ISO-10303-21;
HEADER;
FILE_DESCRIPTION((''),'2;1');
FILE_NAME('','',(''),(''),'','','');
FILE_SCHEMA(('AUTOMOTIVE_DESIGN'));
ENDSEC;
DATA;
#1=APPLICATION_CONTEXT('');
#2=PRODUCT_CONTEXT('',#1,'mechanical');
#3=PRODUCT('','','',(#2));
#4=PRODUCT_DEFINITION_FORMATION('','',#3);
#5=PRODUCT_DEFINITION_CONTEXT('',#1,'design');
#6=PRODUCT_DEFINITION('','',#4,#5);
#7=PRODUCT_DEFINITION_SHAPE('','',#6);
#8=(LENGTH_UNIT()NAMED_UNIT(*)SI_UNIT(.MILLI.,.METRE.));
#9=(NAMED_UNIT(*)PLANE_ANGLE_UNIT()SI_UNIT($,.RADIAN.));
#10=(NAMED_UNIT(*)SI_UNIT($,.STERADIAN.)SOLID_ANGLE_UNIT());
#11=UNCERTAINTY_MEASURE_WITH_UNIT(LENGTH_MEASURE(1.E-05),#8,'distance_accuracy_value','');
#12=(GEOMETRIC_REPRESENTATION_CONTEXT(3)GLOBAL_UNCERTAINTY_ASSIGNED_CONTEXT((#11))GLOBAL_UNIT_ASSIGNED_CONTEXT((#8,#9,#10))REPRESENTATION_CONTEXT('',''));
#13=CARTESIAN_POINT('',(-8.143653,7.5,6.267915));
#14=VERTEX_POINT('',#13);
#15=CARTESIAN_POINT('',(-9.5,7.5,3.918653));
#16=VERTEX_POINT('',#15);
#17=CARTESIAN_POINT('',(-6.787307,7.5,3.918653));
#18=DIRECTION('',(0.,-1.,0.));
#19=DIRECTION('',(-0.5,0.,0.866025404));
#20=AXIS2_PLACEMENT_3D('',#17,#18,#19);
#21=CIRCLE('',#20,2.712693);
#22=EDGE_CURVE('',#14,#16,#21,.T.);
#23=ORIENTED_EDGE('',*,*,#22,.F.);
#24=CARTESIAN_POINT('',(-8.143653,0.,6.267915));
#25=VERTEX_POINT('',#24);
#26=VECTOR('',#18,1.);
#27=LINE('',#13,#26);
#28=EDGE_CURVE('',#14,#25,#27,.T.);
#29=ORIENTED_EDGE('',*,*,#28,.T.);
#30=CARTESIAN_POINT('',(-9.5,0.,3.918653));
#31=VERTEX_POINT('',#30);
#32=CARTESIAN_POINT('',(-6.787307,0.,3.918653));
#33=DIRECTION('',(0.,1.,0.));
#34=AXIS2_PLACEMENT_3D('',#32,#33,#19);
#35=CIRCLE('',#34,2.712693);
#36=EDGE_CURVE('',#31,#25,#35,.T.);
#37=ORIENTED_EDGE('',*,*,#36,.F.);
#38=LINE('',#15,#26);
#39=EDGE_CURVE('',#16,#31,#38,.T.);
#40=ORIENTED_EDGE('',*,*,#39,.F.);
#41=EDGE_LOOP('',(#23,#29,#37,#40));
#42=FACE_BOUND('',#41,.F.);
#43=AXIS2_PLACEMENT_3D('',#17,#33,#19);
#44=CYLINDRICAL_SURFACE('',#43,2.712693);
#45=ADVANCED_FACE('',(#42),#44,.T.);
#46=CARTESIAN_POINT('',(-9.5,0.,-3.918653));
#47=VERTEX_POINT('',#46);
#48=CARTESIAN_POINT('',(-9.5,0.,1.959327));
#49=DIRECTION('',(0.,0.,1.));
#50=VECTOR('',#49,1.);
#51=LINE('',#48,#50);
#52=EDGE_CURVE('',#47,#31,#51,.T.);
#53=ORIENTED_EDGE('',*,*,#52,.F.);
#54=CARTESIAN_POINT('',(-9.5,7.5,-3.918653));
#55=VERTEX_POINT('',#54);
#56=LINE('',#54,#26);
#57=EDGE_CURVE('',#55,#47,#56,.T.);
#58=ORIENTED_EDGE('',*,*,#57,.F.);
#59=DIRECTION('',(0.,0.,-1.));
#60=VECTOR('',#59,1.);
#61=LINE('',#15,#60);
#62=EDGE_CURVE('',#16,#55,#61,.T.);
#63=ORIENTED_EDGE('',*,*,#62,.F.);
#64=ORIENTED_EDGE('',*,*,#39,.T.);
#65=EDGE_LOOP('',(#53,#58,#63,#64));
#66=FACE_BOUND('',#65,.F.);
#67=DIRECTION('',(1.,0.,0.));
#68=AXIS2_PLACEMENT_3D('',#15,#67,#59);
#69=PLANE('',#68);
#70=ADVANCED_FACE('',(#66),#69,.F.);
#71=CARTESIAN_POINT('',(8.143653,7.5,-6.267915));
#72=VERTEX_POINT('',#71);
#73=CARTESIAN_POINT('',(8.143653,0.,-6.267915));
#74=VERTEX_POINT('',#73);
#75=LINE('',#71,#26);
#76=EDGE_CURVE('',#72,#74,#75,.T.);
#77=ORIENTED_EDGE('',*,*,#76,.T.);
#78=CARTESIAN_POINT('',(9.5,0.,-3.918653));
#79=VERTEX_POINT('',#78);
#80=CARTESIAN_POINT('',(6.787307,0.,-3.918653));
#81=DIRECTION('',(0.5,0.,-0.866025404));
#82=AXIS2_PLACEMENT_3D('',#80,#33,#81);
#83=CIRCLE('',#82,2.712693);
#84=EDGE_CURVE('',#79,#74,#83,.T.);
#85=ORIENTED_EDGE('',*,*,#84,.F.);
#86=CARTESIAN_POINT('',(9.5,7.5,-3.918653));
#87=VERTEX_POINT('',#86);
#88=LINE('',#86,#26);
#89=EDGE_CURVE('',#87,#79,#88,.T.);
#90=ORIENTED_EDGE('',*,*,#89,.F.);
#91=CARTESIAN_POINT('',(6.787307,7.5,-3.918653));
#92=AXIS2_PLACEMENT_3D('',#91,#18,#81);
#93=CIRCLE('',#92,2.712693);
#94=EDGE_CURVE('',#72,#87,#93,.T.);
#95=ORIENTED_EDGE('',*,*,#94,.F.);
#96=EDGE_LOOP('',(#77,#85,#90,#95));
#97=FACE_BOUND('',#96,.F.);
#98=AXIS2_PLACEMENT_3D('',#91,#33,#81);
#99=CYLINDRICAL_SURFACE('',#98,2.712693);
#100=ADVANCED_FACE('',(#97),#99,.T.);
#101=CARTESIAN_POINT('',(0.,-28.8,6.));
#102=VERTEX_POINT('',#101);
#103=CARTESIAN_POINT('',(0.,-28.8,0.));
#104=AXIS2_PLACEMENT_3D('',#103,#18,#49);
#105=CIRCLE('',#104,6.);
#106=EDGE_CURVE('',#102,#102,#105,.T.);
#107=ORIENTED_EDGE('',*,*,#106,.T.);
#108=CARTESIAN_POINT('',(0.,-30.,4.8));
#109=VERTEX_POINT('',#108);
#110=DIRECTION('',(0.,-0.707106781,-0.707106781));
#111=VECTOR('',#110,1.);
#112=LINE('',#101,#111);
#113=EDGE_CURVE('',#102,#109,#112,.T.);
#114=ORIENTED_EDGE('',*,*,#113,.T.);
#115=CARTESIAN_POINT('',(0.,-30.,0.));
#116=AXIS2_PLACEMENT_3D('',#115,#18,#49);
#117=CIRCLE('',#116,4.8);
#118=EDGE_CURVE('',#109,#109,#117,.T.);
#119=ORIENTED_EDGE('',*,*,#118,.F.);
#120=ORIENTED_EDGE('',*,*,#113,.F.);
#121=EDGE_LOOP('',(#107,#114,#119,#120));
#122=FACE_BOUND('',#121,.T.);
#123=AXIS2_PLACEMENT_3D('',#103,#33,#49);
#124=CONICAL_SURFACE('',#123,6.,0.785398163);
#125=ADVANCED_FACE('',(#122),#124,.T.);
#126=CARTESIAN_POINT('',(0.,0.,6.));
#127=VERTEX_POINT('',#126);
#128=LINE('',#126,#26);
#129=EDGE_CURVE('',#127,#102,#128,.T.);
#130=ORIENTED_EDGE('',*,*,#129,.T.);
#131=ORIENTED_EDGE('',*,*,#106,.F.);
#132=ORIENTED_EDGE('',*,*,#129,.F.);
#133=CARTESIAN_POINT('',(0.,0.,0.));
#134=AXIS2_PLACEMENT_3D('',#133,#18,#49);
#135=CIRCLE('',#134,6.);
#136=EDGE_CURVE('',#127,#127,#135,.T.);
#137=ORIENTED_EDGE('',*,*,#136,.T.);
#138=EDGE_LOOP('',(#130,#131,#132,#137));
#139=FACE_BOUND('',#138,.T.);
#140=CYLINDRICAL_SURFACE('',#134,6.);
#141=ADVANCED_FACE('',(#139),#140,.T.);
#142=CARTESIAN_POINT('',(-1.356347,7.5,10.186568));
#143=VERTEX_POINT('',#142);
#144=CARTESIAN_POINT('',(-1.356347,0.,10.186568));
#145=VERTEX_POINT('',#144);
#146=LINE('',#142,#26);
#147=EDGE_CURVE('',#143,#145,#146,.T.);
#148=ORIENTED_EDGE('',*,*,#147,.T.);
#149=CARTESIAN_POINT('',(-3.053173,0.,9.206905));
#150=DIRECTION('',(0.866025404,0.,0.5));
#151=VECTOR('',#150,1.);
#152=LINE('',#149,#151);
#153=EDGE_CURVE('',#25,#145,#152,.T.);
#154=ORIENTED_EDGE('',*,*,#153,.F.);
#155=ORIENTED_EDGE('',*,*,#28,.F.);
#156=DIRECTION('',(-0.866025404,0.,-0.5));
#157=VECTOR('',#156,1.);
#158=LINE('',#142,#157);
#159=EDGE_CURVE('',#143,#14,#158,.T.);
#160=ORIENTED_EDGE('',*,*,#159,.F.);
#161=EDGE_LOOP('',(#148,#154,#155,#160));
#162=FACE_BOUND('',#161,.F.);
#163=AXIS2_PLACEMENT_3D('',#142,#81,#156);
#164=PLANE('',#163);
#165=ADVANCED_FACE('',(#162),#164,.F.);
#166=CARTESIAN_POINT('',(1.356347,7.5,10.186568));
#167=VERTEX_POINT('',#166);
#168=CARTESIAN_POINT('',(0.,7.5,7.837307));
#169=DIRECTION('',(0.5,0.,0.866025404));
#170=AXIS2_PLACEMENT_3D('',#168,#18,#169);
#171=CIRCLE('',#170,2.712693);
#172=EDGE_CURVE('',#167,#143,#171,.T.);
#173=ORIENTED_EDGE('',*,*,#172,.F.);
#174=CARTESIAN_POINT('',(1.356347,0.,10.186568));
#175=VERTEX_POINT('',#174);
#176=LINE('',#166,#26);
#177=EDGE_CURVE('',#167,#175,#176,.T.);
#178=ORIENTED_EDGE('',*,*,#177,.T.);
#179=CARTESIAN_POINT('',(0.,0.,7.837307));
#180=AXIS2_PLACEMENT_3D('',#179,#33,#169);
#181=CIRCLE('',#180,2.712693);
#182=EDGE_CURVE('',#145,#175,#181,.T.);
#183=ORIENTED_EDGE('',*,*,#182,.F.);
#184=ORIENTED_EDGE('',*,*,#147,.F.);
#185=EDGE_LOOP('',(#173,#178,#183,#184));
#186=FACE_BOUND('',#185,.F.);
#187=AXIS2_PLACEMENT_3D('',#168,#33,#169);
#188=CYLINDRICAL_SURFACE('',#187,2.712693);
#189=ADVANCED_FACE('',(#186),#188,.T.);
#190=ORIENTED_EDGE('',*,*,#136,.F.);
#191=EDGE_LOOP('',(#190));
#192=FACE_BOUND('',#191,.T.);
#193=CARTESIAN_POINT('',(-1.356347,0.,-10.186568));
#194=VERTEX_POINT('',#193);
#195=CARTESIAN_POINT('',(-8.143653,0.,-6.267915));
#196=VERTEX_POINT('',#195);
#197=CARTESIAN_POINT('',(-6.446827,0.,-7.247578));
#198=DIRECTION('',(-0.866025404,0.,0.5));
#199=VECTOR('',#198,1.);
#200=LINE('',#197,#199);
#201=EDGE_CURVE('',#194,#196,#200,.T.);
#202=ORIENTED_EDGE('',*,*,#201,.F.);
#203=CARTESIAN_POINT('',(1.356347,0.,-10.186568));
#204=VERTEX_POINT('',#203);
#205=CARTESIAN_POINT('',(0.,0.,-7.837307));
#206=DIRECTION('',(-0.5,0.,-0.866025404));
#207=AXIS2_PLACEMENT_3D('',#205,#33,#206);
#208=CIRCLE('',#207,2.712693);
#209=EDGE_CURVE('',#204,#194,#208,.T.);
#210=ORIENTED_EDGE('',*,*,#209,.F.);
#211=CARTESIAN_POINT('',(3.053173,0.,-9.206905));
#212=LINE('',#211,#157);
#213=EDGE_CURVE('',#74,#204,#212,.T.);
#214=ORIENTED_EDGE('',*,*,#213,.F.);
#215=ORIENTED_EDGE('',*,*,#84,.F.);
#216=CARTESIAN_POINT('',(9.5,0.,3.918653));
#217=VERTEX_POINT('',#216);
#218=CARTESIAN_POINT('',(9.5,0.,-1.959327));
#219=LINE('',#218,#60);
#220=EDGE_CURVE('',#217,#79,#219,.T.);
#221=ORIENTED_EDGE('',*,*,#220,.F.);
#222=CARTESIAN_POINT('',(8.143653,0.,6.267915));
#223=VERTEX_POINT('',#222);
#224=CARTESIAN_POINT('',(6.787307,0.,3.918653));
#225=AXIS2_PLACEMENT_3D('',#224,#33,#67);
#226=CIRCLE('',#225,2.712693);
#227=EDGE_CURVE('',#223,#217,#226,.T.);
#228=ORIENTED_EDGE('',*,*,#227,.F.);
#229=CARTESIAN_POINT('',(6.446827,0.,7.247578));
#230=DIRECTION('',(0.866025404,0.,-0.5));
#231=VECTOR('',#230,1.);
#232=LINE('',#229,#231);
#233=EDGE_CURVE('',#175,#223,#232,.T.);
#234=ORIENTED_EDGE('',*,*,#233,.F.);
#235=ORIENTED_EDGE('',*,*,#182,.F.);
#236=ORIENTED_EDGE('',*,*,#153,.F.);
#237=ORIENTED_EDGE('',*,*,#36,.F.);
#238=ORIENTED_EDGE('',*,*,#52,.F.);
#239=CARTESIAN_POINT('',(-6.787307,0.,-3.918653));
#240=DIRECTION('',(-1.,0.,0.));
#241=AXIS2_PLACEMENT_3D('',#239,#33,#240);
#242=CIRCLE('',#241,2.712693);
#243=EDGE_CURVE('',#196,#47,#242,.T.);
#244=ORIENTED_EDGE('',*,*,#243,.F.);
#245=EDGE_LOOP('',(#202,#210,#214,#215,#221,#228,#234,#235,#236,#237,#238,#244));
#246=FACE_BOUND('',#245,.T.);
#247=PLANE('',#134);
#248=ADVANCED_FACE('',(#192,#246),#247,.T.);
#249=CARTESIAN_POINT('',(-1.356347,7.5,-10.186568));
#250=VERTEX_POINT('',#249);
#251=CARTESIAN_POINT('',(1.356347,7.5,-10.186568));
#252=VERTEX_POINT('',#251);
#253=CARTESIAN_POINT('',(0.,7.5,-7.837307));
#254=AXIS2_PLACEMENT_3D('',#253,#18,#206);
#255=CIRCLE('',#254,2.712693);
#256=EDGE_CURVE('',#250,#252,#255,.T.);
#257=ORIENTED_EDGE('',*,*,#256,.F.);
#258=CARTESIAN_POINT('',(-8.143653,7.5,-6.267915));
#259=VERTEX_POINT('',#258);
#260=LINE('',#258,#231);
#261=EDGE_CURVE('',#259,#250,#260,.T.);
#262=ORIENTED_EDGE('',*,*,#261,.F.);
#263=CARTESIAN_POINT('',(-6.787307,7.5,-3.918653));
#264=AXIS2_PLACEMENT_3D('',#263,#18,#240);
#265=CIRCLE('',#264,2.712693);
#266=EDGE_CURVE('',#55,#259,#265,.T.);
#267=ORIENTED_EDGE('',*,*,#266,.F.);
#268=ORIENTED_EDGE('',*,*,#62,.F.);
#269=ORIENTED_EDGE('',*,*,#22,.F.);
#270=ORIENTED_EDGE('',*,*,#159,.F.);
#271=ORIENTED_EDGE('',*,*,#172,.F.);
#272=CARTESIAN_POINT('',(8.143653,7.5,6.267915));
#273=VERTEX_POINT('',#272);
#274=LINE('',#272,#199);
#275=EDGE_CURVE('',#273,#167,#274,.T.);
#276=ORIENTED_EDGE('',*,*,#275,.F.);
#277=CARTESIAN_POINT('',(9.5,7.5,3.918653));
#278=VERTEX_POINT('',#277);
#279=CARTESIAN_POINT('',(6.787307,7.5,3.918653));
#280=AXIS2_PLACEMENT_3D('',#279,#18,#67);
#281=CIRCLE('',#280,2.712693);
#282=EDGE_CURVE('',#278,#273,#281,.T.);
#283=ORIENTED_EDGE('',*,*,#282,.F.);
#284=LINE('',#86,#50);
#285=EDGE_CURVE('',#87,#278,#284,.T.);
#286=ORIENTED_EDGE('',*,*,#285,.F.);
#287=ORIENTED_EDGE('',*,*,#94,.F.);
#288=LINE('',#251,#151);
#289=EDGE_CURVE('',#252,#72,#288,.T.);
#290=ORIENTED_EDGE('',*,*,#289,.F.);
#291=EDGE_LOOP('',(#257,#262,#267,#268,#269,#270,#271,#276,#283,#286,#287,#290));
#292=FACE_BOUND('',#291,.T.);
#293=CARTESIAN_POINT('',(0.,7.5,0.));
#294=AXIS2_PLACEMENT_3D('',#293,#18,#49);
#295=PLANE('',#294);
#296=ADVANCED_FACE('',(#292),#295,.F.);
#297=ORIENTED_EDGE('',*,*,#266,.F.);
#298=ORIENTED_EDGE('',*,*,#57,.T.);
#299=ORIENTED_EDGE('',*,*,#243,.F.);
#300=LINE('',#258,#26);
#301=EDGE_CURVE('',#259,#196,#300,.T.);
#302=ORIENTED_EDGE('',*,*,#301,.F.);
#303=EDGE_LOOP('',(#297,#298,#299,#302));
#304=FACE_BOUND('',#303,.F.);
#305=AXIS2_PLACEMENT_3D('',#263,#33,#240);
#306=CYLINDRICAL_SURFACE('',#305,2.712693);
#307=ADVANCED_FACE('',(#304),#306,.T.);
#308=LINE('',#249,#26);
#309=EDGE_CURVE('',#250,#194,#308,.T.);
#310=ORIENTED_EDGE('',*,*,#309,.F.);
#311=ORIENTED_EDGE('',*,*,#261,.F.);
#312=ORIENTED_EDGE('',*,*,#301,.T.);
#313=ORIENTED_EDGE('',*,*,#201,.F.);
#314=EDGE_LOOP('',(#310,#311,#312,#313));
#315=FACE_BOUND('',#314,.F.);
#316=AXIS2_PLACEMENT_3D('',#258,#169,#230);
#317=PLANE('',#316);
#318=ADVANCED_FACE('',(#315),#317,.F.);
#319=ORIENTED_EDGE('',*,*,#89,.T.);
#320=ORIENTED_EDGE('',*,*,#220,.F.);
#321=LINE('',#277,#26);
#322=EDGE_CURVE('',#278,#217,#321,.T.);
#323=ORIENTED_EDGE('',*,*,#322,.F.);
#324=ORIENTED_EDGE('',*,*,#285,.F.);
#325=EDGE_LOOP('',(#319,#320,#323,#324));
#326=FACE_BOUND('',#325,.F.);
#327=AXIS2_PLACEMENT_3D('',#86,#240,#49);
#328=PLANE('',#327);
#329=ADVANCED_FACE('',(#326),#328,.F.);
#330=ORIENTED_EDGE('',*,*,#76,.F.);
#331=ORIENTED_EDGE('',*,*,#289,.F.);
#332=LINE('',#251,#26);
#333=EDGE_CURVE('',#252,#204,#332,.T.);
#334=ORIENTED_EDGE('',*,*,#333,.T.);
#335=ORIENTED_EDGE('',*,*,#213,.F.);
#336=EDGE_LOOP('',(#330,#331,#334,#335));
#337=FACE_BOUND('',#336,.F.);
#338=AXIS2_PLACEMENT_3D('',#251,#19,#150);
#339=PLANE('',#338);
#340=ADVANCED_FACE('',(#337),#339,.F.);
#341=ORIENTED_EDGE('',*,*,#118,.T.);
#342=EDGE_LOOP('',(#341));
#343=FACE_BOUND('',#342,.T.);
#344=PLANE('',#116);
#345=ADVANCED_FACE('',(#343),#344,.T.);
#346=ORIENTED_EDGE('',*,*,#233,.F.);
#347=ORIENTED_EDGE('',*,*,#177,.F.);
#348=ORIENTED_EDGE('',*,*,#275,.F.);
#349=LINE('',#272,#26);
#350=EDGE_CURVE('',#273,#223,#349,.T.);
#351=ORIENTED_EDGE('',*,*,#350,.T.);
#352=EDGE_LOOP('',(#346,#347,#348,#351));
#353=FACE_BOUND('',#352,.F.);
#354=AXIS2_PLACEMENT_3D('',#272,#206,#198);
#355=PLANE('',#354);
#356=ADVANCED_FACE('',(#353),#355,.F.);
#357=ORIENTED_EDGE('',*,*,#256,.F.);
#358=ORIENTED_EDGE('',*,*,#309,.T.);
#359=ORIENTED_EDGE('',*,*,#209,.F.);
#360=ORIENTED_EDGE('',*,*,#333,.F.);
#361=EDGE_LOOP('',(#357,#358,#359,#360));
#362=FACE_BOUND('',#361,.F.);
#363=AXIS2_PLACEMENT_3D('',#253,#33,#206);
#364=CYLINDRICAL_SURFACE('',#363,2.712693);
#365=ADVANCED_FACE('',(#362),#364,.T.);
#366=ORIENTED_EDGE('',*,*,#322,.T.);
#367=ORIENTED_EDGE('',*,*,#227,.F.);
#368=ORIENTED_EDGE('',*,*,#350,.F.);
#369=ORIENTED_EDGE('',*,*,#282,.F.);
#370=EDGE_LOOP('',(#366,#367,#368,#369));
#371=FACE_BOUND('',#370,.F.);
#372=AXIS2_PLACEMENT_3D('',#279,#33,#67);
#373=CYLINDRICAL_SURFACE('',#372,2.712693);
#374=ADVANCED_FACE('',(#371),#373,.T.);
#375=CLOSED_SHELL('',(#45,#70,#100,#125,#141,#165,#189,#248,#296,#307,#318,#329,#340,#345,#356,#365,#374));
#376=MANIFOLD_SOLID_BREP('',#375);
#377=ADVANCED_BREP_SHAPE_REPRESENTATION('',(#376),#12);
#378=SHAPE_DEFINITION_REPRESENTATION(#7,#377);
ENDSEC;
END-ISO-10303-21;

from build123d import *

# Parameters (mm, degrees)
F2_R     = 15.825
F3_DEPTH = 25


# Not quite as in the source:
# - a feature names something its author has since deleted; it is built from what else it names


with BuildPart() as f1:
    # F0 (on Right) → F1 (revolve)
    with BuildSketch(Plane.YZ):
        Polygon((0, 15.825), (0, 6), (-28.8, 6), (-30, 4.8), (-30, 0), (7.5, 0), (7.5, 15.825), align=None)
    revolve(axis=Axis((0, -11.25, 0), (0, -1, 0)))

    # F2 (on face) → F3 (cut)
    with BuildSketch(Plane(origin=(0, 7.5, 0), x_dir=(-1, 0, 0), z_dir=(0, 1, 0))):
        Circle(F2_R)
        with BuildLine():
            ThreePointArc((1.3563466521, -10.1865680099), (0, -10.55), (-1.3563466521, -10.1865680099))
            Line((-1.3563466521, -10.1865680099), (-8.1436533479, -6.267914662))
            ThreePointArc((-8.1436533479, -6.267914662), (-9.1365680099, -5.275), (-9.5, -3.9186533479))
            Line((-9.5, -3.9186533479), (-9.5, 3.9186533479))
            ThreePointArc((-9.5, 3.9186533479), (-9.1365680099, 5.275), (-8.1436533479, 6.267914662))
            Line((-8.1436533479, 6.267914662), (-1.3563466521, 10.1865680099))
            ThreePointArc((-1.3563466521, 10.1865680099), (0, 10.55), (1.3563466521, 10.1865680099))
            Line((1.3563466521, 10.1865680099), (8.1436533479, 6.267914662))
            ThreePointArc((8.1436533479, 6.267914662), (9.1365680099, 5.275), (9.5, 3.9186533479))
            Line((9.5, 3.9186533479), (9.5, -3.9186533479))
            ThreePointArc((9.5, -3.9186533479), (9.1365680099, -5.275), (8.1436533479, -6.267914662))
            Line((8.1436533479, -6.267914662), (1.3563466521, -10.1865680099))
        make_face(mode=Mode.SUBTRACT)
    extrude(amount=-F3_DEPTH, mode=Mode.SUBTRACT)


solid = f1.part
